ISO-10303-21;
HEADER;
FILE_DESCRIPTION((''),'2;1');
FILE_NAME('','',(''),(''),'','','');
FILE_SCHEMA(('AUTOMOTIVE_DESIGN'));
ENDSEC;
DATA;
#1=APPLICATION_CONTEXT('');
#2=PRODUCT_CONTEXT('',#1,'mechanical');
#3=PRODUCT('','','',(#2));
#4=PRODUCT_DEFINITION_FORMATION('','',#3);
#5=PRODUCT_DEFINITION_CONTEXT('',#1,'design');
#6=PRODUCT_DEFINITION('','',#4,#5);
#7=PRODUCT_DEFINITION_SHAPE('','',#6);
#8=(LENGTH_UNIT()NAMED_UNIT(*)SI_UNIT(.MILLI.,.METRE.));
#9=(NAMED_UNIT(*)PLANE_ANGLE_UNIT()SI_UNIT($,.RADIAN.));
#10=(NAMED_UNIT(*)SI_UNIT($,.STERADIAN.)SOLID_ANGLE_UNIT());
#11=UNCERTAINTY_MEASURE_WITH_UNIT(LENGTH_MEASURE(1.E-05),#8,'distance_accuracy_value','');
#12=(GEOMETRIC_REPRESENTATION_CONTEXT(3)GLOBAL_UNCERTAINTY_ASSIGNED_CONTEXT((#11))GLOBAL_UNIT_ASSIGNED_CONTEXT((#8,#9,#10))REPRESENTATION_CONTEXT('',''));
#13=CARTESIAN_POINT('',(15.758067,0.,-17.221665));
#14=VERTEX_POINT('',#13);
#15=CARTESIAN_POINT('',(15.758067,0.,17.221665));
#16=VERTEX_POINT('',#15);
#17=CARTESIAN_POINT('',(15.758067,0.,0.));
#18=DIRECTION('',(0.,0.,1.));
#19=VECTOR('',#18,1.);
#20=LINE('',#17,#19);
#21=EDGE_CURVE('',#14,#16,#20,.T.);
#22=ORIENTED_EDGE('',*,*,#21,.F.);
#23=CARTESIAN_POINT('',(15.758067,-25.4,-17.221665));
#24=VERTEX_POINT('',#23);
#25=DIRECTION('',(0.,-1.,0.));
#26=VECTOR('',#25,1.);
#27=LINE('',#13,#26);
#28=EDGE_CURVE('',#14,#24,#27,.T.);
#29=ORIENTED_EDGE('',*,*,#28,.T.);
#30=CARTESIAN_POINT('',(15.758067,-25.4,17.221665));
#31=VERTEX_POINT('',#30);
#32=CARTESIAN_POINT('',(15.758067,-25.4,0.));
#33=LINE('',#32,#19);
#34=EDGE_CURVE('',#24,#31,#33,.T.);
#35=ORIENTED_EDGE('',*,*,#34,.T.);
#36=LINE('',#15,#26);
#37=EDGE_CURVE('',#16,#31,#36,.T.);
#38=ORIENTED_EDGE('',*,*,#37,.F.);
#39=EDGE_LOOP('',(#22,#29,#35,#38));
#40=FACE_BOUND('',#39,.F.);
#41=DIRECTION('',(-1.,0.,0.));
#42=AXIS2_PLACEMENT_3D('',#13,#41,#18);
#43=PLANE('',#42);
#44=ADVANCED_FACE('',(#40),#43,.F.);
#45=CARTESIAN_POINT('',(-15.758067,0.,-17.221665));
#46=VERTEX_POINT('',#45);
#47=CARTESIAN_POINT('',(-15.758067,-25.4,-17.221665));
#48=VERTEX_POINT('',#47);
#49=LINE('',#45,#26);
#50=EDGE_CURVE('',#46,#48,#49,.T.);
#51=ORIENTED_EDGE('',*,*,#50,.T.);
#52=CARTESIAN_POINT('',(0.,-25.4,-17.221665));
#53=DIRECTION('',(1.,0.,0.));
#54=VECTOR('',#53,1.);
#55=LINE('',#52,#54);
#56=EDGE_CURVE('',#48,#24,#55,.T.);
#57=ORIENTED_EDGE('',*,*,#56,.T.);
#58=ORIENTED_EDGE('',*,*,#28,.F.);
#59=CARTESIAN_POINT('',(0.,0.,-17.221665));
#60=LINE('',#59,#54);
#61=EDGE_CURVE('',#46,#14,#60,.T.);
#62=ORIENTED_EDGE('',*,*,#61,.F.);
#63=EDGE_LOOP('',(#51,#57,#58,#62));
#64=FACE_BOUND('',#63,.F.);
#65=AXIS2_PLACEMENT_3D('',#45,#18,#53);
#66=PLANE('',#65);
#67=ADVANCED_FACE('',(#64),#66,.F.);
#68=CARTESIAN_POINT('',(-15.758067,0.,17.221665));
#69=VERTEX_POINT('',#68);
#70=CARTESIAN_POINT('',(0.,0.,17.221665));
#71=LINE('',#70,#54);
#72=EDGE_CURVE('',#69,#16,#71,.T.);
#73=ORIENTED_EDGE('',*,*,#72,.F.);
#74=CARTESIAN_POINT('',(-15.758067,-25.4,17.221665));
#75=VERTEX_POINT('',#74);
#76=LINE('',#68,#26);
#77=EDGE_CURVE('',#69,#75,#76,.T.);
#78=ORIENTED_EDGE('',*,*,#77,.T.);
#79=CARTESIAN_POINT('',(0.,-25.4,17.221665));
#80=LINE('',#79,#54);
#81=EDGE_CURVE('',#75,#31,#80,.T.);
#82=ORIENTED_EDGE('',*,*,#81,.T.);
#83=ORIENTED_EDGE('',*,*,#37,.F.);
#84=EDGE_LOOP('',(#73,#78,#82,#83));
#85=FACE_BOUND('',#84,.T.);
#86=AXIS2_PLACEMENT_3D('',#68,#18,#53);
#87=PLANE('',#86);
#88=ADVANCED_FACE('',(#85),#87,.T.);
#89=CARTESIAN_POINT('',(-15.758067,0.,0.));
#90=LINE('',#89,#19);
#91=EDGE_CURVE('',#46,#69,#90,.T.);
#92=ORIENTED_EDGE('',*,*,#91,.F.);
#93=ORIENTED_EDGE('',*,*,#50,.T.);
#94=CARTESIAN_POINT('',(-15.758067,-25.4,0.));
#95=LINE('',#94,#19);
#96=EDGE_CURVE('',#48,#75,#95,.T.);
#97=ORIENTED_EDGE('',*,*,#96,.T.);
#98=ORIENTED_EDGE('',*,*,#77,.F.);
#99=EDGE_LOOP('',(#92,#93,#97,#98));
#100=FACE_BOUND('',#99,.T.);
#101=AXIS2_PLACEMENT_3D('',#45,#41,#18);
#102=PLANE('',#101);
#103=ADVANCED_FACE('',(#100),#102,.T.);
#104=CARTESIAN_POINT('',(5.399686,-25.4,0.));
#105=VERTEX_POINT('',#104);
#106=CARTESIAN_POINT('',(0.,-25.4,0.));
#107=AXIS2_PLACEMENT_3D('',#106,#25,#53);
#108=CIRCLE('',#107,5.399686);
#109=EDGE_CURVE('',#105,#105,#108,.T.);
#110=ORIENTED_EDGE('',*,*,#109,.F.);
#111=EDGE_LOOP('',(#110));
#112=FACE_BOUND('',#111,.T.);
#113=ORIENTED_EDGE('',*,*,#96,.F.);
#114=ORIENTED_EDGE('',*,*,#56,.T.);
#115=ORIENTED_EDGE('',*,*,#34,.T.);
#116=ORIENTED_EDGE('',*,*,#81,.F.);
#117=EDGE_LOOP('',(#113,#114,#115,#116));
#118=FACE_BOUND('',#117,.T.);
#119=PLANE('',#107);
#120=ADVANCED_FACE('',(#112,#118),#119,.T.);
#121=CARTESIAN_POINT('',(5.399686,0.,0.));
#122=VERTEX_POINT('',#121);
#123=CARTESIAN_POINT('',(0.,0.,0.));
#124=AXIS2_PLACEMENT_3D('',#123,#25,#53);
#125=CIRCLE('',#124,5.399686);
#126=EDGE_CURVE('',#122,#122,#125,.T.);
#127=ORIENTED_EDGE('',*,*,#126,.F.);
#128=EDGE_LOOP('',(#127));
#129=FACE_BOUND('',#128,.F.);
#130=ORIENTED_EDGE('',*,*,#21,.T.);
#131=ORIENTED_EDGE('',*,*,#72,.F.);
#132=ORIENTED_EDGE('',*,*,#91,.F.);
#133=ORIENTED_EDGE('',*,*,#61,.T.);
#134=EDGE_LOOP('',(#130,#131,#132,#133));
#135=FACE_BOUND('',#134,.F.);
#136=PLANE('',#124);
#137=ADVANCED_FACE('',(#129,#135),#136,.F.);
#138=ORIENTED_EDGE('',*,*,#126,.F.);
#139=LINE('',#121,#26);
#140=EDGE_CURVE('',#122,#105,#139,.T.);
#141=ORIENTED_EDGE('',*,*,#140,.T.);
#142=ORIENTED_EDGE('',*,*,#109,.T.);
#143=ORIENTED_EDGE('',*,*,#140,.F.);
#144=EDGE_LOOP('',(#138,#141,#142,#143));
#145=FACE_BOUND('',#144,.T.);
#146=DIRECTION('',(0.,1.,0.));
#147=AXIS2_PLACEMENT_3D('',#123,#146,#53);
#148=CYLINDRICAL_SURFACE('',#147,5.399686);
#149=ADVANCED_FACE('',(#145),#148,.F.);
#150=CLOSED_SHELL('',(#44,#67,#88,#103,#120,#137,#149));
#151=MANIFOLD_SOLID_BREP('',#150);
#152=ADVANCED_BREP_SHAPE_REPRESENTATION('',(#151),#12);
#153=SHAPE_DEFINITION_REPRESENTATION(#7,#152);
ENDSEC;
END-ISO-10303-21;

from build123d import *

# Parameters (mm, degrees)
F0_W     = 31.5161347389
F0_H     = 34.4433300197
F0_R     = 5.3996855878
F1_DEPTH = 25.4


# Not quite as in the source:
# - the program builds the solid bodies; features that only make, move or delete a surface that nothing else refers to are left out


with BuildPart() as f1:
    # F0 (on Front) → F1 (new body)
    with BuildSketch(Plane.XZ):
        Rectangle(F0_W, F0_H)
        Circle(F0_R, mode=Mode.SUBTRACT)
    extrude(amount=F1_DEPTH)


solid = f1.part
